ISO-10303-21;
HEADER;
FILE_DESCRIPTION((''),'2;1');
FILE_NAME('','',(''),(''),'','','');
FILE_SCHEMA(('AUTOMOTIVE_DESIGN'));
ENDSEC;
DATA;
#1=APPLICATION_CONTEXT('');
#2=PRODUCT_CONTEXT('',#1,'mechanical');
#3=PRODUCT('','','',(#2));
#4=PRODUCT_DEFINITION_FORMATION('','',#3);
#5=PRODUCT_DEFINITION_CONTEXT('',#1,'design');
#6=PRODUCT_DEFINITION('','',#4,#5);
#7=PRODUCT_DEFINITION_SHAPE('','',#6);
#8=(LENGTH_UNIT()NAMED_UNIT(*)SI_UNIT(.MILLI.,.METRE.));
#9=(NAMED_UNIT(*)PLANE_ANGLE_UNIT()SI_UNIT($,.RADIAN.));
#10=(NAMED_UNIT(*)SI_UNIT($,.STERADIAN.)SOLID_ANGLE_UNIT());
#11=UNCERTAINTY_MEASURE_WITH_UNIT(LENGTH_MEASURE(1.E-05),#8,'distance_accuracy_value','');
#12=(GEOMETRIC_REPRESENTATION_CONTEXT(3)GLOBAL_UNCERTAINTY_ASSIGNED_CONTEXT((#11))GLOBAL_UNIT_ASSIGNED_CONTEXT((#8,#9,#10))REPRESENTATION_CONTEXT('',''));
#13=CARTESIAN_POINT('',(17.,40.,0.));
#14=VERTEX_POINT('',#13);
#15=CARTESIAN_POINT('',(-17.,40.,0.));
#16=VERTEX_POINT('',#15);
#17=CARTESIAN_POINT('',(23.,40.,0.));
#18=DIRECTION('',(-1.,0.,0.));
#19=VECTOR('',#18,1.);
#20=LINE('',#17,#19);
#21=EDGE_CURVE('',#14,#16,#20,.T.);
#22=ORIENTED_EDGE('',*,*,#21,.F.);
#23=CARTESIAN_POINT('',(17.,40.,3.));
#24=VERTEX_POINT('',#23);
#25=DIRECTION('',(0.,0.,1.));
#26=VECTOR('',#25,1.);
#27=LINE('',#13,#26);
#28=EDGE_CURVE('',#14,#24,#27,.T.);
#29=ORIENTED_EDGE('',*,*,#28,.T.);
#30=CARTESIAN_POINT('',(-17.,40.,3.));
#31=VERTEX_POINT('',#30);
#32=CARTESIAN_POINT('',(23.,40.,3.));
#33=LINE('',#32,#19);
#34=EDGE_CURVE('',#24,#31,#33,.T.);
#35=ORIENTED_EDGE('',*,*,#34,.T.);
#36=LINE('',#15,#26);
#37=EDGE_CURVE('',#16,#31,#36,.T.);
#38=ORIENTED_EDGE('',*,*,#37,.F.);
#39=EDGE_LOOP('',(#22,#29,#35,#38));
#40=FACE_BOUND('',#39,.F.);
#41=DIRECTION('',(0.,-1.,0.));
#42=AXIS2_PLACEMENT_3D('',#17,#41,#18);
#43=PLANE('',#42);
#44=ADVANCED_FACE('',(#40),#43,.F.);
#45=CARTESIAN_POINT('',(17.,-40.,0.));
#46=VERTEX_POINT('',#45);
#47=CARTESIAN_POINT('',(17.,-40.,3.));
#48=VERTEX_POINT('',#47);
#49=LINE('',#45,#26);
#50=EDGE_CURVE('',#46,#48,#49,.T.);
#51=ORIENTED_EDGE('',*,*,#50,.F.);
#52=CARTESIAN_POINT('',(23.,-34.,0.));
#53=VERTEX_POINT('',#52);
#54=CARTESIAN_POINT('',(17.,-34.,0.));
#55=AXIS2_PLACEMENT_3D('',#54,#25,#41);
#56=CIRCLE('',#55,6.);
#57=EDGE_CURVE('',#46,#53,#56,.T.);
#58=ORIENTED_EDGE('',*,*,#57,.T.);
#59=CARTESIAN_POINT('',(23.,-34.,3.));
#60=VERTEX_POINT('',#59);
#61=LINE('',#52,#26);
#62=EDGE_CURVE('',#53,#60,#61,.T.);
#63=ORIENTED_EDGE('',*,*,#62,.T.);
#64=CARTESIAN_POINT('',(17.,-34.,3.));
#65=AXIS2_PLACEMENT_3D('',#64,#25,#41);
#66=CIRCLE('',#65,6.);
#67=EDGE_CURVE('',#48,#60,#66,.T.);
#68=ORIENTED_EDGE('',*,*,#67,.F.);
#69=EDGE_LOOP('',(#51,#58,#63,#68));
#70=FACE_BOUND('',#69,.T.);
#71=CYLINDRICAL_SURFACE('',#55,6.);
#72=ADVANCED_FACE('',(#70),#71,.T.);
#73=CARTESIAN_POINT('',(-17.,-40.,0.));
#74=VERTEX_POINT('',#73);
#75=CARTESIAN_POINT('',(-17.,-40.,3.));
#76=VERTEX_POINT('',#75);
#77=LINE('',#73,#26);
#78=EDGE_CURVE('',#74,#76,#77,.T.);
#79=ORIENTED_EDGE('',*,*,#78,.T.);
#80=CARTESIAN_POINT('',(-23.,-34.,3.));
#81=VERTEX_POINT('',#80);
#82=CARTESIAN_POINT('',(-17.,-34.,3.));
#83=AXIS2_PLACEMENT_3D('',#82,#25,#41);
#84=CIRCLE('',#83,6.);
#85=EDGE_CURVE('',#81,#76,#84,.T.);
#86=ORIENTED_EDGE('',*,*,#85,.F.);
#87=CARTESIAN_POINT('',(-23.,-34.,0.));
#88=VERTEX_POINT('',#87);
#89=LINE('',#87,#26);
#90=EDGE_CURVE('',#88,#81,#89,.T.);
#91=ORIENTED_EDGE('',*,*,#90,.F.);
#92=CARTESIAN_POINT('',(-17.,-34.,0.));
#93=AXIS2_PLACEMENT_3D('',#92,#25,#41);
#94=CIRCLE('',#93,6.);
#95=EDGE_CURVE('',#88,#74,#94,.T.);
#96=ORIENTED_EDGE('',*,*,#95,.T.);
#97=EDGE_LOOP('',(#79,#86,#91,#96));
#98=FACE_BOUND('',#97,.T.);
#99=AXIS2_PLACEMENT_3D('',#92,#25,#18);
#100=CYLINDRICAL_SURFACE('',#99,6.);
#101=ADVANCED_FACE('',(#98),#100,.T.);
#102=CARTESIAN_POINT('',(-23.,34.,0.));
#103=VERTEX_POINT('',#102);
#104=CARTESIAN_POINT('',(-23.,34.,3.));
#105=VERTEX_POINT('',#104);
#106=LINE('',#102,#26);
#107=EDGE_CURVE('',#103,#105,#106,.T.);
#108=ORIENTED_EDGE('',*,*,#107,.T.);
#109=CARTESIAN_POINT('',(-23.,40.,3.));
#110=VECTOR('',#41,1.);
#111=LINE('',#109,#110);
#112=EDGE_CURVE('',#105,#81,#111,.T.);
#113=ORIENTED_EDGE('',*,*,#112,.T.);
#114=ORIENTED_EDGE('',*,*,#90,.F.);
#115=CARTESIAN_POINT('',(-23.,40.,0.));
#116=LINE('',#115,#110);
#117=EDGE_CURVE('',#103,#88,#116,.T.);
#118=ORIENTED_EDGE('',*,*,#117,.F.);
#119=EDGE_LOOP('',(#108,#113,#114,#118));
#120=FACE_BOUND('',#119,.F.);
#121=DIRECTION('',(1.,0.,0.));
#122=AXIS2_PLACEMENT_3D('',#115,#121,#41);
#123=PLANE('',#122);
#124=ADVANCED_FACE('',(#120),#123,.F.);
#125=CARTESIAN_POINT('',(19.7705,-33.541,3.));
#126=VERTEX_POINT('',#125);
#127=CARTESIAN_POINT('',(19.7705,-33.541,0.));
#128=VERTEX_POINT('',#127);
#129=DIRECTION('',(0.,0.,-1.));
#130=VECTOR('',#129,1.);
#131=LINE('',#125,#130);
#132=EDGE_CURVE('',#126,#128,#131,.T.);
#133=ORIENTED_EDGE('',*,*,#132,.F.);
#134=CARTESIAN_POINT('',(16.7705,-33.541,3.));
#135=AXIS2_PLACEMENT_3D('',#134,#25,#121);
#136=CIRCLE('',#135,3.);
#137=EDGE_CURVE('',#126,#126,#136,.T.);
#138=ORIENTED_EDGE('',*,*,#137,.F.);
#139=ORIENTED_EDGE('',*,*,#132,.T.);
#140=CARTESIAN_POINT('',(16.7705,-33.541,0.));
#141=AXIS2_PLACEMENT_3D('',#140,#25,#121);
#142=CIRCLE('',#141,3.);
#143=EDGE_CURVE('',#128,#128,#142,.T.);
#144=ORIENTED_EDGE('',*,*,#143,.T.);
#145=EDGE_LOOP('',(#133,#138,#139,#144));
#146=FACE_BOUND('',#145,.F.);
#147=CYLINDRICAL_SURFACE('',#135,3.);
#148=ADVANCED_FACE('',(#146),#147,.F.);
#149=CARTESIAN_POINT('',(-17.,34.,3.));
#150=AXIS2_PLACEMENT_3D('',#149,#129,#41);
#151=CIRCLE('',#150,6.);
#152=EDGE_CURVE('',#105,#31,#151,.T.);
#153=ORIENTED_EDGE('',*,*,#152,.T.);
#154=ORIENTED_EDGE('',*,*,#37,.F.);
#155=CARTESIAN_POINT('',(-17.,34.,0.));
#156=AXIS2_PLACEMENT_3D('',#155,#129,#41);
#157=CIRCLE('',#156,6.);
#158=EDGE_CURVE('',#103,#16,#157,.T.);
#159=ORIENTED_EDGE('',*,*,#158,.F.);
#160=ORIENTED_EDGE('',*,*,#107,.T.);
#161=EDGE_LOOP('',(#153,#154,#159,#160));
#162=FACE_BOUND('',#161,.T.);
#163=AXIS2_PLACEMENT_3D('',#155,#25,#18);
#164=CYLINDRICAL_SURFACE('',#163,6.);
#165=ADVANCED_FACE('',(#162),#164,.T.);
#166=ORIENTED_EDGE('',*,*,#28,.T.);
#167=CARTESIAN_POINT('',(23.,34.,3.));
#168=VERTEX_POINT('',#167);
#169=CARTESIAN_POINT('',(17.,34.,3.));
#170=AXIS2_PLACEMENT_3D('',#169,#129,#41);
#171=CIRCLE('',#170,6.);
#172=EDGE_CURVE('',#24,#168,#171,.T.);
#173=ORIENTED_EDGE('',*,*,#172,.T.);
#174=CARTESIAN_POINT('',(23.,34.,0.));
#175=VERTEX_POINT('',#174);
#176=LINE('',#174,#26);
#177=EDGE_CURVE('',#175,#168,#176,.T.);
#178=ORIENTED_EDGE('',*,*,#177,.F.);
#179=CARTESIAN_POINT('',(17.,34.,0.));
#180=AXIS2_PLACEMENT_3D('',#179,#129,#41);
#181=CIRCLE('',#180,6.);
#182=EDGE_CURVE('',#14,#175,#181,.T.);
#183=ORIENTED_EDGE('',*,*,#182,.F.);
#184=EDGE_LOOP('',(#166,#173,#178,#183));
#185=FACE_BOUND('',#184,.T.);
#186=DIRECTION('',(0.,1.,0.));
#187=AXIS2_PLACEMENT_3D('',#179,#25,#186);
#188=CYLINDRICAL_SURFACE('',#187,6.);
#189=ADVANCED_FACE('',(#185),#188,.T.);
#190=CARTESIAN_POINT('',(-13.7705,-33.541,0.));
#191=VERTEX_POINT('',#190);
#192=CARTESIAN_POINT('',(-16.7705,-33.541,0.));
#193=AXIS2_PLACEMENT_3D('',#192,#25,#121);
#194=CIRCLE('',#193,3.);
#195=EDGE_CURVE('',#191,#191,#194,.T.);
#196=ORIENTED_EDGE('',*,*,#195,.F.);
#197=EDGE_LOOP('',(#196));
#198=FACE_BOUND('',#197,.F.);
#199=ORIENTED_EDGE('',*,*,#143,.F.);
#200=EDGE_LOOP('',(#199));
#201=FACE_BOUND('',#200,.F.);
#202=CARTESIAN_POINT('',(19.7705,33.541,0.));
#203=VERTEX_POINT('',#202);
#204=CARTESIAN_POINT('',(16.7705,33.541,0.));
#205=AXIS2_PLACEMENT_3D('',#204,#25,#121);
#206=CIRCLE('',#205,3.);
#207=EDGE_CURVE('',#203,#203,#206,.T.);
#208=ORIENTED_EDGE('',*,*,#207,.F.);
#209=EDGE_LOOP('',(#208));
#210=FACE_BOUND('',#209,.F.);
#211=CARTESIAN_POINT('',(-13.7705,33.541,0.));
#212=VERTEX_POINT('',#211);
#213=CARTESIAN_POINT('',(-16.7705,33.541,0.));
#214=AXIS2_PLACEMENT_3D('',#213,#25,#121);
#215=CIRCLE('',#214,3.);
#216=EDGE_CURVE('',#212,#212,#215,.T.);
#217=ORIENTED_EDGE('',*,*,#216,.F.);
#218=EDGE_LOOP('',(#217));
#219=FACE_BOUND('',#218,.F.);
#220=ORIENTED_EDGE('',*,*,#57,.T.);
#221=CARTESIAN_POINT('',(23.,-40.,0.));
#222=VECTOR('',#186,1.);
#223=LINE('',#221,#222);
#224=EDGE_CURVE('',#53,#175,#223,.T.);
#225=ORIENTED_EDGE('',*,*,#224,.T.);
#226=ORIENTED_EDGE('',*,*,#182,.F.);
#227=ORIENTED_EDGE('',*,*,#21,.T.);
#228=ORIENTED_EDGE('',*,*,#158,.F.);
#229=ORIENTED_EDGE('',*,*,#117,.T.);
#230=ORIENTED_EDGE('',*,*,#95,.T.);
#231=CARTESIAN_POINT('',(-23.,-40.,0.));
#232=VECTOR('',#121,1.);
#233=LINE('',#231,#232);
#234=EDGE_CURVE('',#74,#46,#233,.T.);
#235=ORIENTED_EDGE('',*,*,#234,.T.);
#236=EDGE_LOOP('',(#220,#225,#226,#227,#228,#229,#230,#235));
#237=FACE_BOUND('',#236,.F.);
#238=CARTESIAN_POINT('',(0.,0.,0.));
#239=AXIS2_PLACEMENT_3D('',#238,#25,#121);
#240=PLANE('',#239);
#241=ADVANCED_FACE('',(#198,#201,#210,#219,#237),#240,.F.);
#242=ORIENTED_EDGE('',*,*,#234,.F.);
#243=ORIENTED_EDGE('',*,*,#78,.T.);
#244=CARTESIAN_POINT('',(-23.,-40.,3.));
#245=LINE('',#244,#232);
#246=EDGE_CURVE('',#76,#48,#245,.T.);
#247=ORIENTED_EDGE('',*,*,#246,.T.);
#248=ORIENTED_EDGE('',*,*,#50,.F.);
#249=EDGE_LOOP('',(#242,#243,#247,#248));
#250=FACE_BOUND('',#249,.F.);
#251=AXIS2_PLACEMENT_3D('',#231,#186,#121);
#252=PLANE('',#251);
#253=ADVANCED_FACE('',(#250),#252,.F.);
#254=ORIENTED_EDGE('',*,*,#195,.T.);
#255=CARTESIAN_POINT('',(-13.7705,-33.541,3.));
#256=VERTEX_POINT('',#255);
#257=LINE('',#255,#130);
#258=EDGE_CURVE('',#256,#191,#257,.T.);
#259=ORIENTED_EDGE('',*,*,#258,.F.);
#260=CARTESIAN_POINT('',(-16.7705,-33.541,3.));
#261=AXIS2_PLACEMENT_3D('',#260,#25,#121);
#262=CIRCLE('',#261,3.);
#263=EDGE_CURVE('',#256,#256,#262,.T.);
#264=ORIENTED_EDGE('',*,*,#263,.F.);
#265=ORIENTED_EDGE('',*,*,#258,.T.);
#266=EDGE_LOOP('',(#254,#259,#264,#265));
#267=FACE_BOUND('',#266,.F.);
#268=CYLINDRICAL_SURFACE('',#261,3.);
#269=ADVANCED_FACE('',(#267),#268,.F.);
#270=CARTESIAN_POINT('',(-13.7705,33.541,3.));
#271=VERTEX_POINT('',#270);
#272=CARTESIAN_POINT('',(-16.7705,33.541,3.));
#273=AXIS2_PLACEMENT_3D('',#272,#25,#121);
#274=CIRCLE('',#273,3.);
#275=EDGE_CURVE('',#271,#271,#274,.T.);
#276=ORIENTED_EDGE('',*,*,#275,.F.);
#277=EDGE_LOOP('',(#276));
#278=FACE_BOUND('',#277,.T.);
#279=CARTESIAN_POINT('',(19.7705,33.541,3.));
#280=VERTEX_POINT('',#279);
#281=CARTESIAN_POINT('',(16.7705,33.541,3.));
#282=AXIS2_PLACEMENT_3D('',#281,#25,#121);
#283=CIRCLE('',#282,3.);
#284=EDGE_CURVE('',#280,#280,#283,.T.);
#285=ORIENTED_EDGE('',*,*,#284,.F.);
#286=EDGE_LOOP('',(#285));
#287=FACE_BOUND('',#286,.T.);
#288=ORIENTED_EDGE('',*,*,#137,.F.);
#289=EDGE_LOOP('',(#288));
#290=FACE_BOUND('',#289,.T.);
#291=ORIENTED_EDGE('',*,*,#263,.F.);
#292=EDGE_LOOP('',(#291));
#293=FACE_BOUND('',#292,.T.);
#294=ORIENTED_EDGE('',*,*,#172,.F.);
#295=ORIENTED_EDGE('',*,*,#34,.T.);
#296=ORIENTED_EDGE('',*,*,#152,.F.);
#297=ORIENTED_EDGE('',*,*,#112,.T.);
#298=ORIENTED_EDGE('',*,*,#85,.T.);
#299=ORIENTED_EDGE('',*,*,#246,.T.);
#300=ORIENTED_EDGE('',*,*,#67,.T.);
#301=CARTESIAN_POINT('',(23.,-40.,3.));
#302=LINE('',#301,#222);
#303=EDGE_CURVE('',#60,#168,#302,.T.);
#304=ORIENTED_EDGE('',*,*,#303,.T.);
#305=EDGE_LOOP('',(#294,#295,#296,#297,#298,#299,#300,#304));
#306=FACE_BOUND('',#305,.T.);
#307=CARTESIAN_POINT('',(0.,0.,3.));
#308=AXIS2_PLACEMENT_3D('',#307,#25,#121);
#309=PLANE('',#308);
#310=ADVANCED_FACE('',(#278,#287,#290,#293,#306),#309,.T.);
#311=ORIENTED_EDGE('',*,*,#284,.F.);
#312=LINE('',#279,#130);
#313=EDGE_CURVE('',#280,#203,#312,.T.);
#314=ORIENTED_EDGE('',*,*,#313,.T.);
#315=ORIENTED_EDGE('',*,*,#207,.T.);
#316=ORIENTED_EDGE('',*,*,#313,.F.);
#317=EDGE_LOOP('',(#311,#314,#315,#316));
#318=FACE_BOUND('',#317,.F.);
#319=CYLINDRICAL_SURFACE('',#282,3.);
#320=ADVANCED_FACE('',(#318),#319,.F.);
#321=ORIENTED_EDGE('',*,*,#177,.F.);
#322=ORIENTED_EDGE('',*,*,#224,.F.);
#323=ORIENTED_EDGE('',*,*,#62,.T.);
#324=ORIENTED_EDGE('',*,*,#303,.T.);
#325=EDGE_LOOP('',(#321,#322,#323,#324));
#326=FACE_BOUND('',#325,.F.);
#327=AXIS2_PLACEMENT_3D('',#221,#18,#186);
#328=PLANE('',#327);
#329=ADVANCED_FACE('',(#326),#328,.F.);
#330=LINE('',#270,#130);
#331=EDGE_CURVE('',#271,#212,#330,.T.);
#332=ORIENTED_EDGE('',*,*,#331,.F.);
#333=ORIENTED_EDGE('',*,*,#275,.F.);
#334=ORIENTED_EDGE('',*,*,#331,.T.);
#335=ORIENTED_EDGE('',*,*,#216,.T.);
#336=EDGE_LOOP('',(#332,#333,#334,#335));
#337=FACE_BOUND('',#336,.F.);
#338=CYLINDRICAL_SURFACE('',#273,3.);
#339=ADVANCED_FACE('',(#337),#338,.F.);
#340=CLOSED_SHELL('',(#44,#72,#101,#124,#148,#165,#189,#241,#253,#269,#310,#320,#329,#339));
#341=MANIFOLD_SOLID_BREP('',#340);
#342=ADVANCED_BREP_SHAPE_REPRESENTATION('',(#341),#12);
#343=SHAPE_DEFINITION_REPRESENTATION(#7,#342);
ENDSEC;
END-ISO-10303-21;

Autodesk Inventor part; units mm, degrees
ref_plane "YZ Plane" through (0, 0, 0) normal (1, 0, 0) x (0, 1, 0)
ref_plane "XZ Plane" through (0, 0, 0) normal (0, 1, 0) x (-1, 0, 0)
ref_plane "XY Plane" through (0, 0, 0) normal (0, 0, 1) x (1, 0, 0)
sketch "Sketch1" plane through (0, 0, 0) normal (0, 0, 1) x (1, 0, 0)
  line L0 (-23, -40) -> (23, -40)
  line L1 (23, -40) -> (23, 40)
  line L2 (23, 40) -> (-23, 40)
  line L3 (-23, 40) -> (-23, -40)
  line L4 (-23, -40) -> (23, 40) construction
  line L5 (23, -40) -> (-23, 40) construction
  line L6 (10, -20) -> (-10, -20)
  line L7 (-10, -20) -> (-10, 20)
  line L8 (-10, 20) -> (10, 20)
  line L9 (10, 20) -> (10, -20)
  line L10 (10, -20) -> (-10, 20) construction
  line L11 (-10, -20) -> (10, 20) construction
  point P0 (0, 0)
  dimension "d154" = 46
  dimension "d155" = 80
  dimension "d172" = 20
  dimension "d181" = 40
extrude "Plate5" add sketch "Sketch1" along normal blind 3 contours L3 L2 L1 L0 | L6 L7 L8 L9
sketch "Sketch9" plane through (0, 0, 3) normal (0, 0, 1) x (1, 0, 0)
  circle A0 centre (16.7705, -33.541) radius 3
  line L0 (16.7705, 33.541) -> (-16.7705, 33.541) construction
  line L1 (-16.7705, 33.541) -> (-16.7705, -33.541) construction
  line L2 (-16.7705, -33.541) -> (16.7705, -33.541) construction
  line L3 (16.7705, -33.541) -> (16.7705, 33.541) construction
  line L4 (16.7705, 33.541) -> (-16.7705, -33.541) construction
  line L5 (-16.7705, 33.541) -> (16.7705, -33.541) construction
  circle A1 centre (-16.7705, -33.541) radius 3
  circle A2 centre (16.7705, 33.541) radius 3
  circle A3 centre (-16.7705, 33.541) radius 3
  circle A4 centre (0, 0) radius 37.5 construction
  line L6 (23, -40) -> (-23, -40) construction
  line L7 (23, 40) -> (23, -40) construction
  line L8 (-23, 40) -> (23, 40) construction
  line L9 (-23, -40) -> (-23, 40) construction
  circle A5 centre (0, 0) radius 22.3607 construction
  line L10 (10, 20) -> (-10, -20) construction
  dimension "d180" = 75
  dimension "d182" = 15.1393
  dimension "d174" = 6
  dimension "d183" = 33.541
extrude "Cut2" cut sketch "Sketch9" against normal blind 3
fillet "Corner Round1" radius 6 4 edges at (23, 40, 1.5) (-23, 40, 1.5) (-23, -40, 1.5) (23, -40, 1.5)
feature "Corner Round2" [suppressed]
properties part number "TKS 3561 BOTTOM FDS support flange" material "Stainless Steel"
